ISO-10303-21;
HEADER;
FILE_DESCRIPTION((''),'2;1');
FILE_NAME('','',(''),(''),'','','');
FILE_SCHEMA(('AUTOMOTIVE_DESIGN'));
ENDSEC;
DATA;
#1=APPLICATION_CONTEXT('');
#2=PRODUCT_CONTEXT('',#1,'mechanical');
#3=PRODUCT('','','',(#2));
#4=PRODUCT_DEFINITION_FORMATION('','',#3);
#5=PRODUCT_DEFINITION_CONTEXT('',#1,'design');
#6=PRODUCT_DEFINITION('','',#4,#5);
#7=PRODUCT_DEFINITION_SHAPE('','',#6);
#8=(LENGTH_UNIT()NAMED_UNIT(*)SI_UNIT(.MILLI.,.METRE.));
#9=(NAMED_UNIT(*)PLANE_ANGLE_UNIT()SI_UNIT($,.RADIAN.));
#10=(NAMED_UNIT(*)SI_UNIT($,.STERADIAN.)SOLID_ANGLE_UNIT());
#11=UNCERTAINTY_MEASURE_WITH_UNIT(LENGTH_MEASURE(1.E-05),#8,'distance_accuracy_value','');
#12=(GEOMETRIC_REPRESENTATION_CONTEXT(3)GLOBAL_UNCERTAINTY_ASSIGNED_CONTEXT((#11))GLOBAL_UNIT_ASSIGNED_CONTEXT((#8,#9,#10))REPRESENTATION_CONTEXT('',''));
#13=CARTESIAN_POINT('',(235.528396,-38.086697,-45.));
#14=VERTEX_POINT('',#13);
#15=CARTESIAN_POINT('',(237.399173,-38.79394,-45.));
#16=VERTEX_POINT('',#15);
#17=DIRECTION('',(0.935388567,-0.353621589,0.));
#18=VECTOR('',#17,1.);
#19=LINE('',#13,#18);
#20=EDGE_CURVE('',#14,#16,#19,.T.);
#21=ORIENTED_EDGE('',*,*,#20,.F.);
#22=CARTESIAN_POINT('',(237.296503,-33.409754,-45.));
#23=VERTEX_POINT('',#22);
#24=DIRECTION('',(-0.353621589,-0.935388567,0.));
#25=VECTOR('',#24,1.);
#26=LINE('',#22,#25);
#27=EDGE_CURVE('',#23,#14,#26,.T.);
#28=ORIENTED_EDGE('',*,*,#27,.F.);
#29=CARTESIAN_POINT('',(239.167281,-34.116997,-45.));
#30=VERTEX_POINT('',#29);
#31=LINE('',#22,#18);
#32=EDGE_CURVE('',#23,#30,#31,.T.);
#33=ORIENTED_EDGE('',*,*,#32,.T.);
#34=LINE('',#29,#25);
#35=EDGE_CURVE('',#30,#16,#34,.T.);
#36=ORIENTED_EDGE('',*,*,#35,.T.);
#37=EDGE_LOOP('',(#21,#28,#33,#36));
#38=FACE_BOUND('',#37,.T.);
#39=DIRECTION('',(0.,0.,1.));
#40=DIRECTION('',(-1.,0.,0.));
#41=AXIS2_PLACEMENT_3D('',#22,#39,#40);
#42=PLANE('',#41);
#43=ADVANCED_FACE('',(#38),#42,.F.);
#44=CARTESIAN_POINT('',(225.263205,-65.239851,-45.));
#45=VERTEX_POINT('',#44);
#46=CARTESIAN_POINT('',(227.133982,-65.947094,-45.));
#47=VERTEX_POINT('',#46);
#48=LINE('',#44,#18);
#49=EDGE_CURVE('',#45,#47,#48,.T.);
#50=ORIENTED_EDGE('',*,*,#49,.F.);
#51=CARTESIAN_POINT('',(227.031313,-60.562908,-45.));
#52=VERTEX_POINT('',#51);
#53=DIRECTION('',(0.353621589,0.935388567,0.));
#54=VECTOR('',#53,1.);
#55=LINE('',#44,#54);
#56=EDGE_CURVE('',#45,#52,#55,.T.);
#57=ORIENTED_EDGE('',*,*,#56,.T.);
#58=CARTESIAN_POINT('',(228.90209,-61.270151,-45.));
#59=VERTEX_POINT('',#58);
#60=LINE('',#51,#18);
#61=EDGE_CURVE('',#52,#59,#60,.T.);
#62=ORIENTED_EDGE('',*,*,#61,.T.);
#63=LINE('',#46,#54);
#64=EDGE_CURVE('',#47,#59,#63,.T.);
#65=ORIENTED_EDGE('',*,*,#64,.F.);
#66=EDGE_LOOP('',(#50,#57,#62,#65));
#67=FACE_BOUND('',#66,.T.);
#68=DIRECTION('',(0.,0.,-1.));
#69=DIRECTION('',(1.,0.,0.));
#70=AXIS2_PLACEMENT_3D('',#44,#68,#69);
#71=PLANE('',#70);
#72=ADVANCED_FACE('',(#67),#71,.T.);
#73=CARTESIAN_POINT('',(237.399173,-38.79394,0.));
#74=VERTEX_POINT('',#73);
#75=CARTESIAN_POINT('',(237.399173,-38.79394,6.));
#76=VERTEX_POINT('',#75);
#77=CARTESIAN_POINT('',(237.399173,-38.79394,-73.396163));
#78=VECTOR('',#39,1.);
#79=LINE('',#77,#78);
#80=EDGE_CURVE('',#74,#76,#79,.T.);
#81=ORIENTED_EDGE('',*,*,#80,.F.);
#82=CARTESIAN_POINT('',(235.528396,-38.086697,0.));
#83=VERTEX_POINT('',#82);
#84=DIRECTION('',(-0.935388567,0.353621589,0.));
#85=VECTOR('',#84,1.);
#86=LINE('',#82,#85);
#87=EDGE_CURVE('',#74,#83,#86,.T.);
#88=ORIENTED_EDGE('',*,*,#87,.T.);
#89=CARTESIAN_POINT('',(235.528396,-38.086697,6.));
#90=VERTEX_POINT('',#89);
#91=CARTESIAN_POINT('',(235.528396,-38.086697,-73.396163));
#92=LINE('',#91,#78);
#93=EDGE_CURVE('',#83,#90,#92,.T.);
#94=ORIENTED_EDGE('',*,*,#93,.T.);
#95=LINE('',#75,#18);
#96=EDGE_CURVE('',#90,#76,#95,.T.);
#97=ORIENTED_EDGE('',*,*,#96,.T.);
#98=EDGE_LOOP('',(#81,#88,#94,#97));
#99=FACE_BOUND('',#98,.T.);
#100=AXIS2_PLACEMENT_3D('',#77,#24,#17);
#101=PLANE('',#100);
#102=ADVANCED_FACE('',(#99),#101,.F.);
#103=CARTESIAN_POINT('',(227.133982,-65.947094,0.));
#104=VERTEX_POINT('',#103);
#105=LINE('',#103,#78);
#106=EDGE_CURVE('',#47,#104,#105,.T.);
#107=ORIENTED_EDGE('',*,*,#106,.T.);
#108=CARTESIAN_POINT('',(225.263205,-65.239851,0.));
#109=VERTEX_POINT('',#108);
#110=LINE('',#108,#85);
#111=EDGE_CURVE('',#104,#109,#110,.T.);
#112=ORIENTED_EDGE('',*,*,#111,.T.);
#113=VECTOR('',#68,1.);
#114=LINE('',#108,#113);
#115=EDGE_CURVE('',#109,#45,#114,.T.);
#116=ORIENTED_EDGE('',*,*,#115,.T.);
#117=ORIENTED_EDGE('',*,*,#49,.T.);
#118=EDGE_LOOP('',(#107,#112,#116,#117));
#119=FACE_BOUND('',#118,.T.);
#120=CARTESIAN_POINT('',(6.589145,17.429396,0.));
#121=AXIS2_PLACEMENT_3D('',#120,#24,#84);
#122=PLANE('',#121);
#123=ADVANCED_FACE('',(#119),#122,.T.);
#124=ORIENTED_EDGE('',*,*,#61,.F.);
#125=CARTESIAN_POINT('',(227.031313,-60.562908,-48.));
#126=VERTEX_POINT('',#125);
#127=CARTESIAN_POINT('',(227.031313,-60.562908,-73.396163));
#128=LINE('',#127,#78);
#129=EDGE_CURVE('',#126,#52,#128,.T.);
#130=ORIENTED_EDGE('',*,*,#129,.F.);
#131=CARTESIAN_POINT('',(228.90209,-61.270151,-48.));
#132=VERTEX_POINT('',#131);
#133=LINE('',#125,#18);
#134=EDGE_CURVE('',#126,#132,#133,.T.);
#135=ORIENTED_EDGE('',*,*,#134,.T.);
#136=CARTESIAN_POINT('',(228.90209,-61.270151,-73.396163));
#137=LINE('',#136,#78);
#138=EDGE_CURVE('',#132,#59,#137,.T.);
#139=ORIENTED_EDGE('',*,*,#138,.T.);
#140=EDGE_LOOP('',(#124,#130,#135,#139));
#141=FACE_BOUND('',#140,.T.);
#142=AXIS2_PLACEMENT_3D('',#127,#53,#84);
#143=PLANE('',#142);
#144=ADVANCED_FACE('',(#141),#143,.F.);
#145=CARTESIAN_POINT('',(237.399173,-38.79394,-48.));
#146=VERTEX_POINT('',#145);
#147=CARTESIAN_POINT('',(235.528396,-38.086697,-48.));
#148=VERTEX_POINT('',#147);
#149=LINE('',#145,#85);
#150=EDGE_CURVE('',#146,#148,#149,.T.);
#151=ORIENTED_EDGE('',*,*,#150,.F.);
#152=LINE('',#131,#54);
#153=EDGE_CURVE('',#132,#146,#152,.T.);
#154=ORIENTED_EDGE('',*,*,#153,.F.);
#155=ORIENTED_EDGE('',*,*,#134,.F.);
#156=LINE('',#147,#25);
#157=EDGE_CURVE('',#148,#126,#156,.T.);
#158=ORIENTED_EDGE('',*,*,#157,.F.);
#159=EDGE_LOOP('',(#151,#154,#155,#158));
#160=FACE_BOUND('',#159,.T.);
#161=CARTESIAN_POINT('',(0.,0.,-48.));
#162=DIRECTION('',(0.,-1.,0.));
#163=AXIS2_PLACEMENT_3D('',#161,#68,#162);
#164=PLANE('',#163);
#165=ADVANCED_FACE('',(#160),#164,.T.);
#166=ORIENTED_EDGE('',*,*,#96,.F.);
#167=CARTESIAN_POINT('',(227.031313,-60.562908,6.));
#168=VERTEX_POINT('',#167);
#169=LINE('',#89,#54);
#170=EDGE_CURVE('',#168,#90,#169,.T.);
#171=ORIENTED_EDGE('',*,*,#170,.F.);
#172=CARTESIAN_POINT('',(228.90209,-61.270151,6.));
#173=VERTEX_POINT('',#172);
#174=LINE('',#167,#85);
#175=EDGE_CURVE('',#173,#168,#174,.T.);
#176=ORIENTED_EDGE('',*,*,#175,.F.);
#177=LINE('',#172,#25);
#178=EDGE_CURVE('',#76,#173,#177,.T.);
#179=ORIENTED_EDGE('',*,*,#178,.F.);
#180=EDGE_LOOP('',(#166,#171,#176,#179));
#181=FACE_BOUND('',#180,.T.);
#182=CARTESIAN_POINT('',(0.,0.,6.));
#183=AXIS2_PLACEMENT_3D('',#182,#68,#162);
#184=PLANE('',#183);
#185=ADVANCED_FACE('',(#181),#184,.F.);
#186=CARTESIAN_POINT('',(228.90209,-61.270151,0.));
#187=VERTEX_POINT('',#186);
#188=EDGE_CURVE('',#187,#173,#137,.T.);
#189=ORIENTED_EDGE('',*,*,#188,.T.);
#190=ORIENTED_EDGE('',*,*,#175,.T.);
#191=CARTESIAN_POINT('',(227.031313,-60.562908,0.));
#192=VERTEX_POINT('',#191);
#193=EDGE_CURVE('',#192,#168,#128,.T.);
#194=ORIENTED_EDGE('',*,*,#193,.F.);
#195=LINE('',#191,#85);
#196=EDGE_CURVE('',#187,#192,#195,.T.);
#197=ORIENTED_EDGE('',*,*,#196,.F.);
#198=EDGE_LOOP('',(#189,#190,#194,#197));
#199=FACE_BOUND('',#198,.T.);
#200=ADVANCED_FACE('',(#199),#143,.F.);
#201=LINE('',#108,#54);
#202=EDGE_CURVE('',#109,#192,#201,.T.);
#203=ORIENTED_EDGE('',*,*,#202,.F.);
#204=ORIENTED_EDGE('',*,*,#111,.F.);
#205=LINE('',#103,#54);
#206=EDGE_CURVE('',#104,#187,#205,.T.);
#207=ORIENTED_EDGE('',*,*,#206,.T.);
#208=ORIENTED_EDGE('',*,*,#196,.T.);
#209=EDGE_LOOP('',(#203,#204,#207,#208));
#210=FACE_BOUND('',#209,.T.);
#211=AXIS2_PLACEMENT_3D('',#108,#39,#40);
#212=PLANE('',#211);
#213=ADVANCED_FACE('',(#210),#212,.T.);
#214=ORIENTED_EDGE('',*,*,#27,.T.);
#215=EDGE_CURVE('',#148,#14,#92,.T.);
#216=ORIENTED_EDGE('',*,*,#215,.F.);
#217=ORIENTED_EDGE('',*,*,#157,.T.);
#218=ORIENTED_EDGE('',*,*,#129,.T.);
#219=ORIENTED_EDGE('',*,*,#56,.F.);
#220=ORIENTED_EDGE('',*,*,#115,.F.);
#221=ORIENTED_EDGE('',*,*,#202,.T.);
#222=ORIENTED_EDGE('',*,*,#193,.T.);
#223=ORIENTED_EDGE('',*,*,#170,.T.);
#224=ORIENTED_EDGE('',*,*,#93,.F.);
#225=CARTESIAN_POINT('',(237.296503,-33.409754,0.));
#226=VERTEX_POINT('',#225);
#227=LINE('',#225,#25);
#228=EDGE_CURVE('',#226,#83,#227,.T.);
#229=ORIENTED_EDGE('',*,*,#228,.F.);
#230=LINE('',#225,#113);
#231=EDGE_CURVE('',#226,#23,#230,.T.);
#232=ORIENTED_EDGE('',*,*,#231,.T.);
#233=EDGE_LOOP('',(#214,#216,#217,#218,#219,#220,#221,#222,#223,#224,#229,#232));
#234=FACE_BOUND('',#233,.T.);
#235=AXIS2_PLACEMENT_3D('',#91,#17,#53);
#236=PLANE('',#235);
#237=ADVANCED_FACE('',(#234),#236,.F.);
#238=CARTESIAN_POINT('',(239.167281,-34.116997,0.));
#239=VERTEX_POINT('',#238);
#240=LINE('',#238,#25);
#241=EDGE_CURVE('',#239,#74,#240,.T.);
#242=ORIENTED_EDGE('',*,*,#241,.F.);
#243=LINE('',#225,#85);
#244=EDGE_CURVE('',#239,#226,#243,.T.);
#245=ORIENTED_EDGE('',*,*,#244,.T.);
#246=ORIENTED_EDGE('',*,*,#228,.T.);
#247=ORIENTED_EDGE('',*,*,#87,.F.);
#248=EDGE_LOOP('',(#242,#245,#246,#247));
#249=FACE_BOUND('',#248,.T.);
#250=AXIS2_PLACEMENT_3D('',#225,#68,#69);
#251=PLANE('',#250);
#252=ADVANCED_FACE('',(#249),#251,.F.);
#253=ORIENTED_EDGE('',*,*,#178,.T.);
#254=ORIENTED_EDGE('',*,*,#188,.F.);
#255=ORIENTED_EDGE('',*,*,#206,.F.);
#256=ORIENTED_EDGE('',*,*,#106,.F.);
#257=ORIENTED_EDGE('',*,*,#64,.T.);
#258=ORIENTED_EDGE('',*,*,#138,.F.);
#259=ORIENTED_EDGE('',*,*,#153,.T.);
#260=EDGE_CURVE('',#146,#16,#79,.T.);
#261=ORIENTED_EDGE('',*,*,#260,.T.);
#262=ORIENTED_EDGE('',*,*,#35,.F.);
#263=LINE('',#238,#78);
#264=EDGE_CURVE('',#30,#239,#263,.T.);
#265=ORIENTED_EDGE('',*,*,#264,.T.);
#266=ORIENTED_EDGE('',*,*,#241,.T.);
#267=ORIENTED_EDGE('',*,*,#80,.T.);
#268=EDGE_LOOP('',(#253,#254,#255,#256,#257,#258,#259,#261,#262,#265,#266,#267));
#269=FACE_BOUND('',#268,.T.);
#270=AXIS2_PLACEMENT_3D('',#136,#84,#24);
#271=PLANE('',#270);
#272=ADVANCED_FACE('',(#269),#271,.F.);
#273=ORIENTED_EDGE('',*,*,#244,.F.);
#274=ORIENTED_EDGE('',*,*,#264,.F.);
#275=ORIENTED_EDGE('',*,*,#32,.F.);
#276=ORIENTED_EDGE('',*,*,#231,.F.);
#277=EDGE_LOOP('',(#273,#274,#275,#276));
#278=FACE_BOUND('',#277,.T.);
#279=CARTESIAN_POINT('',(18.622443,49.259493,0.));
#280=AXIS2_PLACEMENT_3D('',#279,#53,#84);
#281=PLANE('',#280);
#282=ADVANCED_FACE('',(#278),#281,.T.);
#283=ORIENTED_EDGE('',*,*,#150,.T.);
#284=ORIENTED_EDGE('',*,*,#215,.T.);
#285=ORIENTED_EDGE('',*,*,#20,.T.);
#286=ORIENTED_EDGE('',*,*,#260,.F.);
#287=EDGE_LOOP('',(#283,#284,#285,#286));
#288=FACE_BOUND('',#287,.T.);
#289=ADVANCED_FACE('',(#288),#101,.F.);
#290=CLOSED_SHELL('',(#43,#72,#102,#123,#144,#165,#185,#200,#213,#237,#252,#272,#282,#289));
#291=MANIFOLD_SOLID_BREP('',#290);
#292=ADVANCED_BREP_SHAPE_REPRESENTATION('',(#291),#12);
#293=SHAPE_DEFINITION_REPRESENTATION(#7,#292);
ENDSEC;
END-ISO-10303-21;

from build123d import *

# Parameters (mm, degrees)
ESTRUSIONE_ESTRUSIONE1_DEPTH      = 48
ESTRUSIONE_ESTRUSIONE1_DEPTH_BACK = 6
SCHIZZO2_W                        = 2
SCHIZZO2_H                        = 45
ESTRUSIONE_ESTRUSIONE2_DEPTH      = 5
CORPO_SPOSTA_COPIA1_START         = 18.633322101
CORPO_SPOSTA_COPIA1_OUTLINE_W     = 2
CORPO_SPOSTA_COPIA1_OUTLINE_H     = 42
CORPO_SPOSTA_COPIA1_DEPTH         = 34.028742836
CORPO_SPOSTA_COPIA1_2_OUTLINE_W   = 2
CORPO_SPOSTA_COPIA1_2_OUTLINE_H   = 6
CORPO_SPOSTA_COPIA1_2_DEPTH       = 5
CORPO_SPOSTA_COPIA1_START_2       = 47.662064937
CORPO_SPOSTA_COPIA1_3_OUTLINE_W   = 2
CORPO_SPOSTA_COPIA1_3_OUTLINE_H   = 6
CORPO_SPOSTA_COPIA1_3_DEPTH       = 5
CORPO_SPOSTA_COPIA1_4_OUTLINE_W   = 2
CORPO_SPOSTA_COPIA1_4_OUTLINE_H   = 45
CORPO_SPOSTA_COPIA1_4_DEPTH       = 34.028742836
CORPO_SPOSTA_COPIA1_START_3       = 23.633322101
CORPO_SPOSTA_COPIA1_5_OUTLINE_W   = 2
CORPO_SPOSTA_COPIA1_5_OUTLINE_H   = 3
CORPO_SPOSTA_COPIA1_5_DEPTH       = 24.028742836


# Read off the part's stored shape, not the designer's step: Corpo-Sposta/copia1
with BuildPart() as part:
    # Schizzo1 → Estrusione-Estrusione1 (new, two sides: drawn at the far end of the back side and taken through both)
    with BuildSketch(Plane.XY.offset(-ESTRUSIONE_ESTRUSIONE1_DEPTH_BACK)):
        Polygon((235.52839554, -38.086696659), (227.03131331, -60.562907992), (228.902090444, -61.27015117), (237.399172674, -38.793939838), align=None)
    extrude(amount=ESTRUSIONE_ESTRUSIONE1_DEPTH + ESTRUSIONE_ESTRUSIONE1_DEPTH_BACK)

    # Schizzo2 → Estrusione-Estrusione2 (add)
    with BuildSketch(Plane(origin=(16.854335152, 44.58255063, 0), x_dir=(0.9353885671687735, -0.3536215892871206, 0), z_dir=(0.3536215892871206, 0.9353885671687735, 0))):
        with Locations((234.778846635, -22.5)):
            Rectangle(SCHIZZO2_W, SCHIZZO2_H)
    estrusione_estrusione2 = extrude(amount=ESTRUSIONE_ESTRUSIONE2_DEPTH)

    # Specchia1: Estrusione-Estrusione2 across plane
    add(estrusione_estrusione2.mirror(Plane(origin=(12.605794037, 33.344444963, 0), x_dir=(0, 0, 1), z_dir=(0.35362158928712106, 0.9353885671687733, 0))))

    # Corpo-Sposta/copia1 outline → Corpo-Sposta/copia1 (cut)
    with BuildSketch(Plane(origin=(0, 0, 0), x_dir=(0.9353885671687733, -0.3536215892871211, 0), z_dir=(0.35362158928712106, 0.9353885671687733, 0)).offset(CORPO_SPOSTA_COPIA1_START)):
        with Locations((234.778846635, -27)):
            Rectangle(CORPO_SPOSTA_COPIA1_OUTLINE_W, CORPO_SPOSTA_COPIA1_OUTLINE_H)
    extrude(amount=CORPO_SPOSTA_COPIA1_DEPTH, mode=Mode.SUBTRACT)

    # Corpo-Sposta_copia1 2 outline → Corpo-Sposta_copia1 2 (cut)
    with BuildSketch(Plane(origin=(0, 0, 0), x_dir=(0.9353885671687733, -0.3536215892871211, 0), z_dir=(0.35362158928712106, 0.9353885671687733, 0)).offset(CORPO_SPOSTA_COPIA1_START)):
        with Locations((234.778846635, -3)):
            Rectangle(CORPO_SPOSTA_COPIA1_2_OUTLINE_W, CORPO_SPOSTA_COPIA1_2_OUTLINE_H)
    extrude(amount=CORPO_SPOSTA_COPIA1_2_DEPTH, mode=Mode.SUBTRACT)

    # Corpo-Sposta_copia1 3 outline → Corpo-Sposta_copia1 3 (cut)
    with BuildSketch(Plane(origin=(0, 0, 0), x_dir=(0.9353885671687733, -0.3536215892871211, 0), z_dir=(0.35362158928712106, 0.9353885671687733, 0)).offset(CORPO_SPOSTA_COPIA1_START_2)):
        with Locations((234.778846635, -3)):
            Rectangle(CORPO_SPOSTA_COPIA1_3_OUTLINE_W, CORPO_SPOSTA_COPIA1_3_OUTLINE_H)
    extrude(amount=CORPO_SPOSTA_COPIA1_3_DEPTH, mode=Mode.SUBTRACT)

    # Corpo-Sposta_copia1 4 outline → Corpo-Sposta_copia1 4 (add)
    with BuildSketch(Plane(origin=(0, 0, 0), x_dir=(0.9353885671687733, -0.3536215892871211, 0), z_dir=(0.35362158928712106, 0.9353885671687733, 0)).offset(CORPO_SPOSTA_COPIA1_START)):
        with Locations((234.778846635, 22.5)):
            Rectangle(CORPO_SPOSTA_COPIA1_4_OUTLINE_W, CORPO_SPOSTA_COPIA1_4_OUTLINE_H)
    extrude(amount=CORPO_SPOSTA_COPIA1_4_DEPTH)

    # Corpo-Sposta_copia1 5 outline → Corpo-Sposta_copia1 5 (add)
    with BuildSketch(Plane(origin=(0, 0, 0), x_dir=(0.9353885671687733, -0.3536215892871211, 0), z_dir=(0.35362158928712106, 0.9353885671687733, 0)).offset(CORPO_SPOSTA_COPIA1_START_3)):
        with Locations((234.778846635, 46.5)):
            Rectangle(CORPO_SPOSTA_COPIA1_5_OUTLINE_W, CORPO_SPOSTA_COPIA1_5_OUTLINE_H)
    extrude(amount=CORPO_SPOSTA_COPIA1_5_DEPTH)


solid = part.part
